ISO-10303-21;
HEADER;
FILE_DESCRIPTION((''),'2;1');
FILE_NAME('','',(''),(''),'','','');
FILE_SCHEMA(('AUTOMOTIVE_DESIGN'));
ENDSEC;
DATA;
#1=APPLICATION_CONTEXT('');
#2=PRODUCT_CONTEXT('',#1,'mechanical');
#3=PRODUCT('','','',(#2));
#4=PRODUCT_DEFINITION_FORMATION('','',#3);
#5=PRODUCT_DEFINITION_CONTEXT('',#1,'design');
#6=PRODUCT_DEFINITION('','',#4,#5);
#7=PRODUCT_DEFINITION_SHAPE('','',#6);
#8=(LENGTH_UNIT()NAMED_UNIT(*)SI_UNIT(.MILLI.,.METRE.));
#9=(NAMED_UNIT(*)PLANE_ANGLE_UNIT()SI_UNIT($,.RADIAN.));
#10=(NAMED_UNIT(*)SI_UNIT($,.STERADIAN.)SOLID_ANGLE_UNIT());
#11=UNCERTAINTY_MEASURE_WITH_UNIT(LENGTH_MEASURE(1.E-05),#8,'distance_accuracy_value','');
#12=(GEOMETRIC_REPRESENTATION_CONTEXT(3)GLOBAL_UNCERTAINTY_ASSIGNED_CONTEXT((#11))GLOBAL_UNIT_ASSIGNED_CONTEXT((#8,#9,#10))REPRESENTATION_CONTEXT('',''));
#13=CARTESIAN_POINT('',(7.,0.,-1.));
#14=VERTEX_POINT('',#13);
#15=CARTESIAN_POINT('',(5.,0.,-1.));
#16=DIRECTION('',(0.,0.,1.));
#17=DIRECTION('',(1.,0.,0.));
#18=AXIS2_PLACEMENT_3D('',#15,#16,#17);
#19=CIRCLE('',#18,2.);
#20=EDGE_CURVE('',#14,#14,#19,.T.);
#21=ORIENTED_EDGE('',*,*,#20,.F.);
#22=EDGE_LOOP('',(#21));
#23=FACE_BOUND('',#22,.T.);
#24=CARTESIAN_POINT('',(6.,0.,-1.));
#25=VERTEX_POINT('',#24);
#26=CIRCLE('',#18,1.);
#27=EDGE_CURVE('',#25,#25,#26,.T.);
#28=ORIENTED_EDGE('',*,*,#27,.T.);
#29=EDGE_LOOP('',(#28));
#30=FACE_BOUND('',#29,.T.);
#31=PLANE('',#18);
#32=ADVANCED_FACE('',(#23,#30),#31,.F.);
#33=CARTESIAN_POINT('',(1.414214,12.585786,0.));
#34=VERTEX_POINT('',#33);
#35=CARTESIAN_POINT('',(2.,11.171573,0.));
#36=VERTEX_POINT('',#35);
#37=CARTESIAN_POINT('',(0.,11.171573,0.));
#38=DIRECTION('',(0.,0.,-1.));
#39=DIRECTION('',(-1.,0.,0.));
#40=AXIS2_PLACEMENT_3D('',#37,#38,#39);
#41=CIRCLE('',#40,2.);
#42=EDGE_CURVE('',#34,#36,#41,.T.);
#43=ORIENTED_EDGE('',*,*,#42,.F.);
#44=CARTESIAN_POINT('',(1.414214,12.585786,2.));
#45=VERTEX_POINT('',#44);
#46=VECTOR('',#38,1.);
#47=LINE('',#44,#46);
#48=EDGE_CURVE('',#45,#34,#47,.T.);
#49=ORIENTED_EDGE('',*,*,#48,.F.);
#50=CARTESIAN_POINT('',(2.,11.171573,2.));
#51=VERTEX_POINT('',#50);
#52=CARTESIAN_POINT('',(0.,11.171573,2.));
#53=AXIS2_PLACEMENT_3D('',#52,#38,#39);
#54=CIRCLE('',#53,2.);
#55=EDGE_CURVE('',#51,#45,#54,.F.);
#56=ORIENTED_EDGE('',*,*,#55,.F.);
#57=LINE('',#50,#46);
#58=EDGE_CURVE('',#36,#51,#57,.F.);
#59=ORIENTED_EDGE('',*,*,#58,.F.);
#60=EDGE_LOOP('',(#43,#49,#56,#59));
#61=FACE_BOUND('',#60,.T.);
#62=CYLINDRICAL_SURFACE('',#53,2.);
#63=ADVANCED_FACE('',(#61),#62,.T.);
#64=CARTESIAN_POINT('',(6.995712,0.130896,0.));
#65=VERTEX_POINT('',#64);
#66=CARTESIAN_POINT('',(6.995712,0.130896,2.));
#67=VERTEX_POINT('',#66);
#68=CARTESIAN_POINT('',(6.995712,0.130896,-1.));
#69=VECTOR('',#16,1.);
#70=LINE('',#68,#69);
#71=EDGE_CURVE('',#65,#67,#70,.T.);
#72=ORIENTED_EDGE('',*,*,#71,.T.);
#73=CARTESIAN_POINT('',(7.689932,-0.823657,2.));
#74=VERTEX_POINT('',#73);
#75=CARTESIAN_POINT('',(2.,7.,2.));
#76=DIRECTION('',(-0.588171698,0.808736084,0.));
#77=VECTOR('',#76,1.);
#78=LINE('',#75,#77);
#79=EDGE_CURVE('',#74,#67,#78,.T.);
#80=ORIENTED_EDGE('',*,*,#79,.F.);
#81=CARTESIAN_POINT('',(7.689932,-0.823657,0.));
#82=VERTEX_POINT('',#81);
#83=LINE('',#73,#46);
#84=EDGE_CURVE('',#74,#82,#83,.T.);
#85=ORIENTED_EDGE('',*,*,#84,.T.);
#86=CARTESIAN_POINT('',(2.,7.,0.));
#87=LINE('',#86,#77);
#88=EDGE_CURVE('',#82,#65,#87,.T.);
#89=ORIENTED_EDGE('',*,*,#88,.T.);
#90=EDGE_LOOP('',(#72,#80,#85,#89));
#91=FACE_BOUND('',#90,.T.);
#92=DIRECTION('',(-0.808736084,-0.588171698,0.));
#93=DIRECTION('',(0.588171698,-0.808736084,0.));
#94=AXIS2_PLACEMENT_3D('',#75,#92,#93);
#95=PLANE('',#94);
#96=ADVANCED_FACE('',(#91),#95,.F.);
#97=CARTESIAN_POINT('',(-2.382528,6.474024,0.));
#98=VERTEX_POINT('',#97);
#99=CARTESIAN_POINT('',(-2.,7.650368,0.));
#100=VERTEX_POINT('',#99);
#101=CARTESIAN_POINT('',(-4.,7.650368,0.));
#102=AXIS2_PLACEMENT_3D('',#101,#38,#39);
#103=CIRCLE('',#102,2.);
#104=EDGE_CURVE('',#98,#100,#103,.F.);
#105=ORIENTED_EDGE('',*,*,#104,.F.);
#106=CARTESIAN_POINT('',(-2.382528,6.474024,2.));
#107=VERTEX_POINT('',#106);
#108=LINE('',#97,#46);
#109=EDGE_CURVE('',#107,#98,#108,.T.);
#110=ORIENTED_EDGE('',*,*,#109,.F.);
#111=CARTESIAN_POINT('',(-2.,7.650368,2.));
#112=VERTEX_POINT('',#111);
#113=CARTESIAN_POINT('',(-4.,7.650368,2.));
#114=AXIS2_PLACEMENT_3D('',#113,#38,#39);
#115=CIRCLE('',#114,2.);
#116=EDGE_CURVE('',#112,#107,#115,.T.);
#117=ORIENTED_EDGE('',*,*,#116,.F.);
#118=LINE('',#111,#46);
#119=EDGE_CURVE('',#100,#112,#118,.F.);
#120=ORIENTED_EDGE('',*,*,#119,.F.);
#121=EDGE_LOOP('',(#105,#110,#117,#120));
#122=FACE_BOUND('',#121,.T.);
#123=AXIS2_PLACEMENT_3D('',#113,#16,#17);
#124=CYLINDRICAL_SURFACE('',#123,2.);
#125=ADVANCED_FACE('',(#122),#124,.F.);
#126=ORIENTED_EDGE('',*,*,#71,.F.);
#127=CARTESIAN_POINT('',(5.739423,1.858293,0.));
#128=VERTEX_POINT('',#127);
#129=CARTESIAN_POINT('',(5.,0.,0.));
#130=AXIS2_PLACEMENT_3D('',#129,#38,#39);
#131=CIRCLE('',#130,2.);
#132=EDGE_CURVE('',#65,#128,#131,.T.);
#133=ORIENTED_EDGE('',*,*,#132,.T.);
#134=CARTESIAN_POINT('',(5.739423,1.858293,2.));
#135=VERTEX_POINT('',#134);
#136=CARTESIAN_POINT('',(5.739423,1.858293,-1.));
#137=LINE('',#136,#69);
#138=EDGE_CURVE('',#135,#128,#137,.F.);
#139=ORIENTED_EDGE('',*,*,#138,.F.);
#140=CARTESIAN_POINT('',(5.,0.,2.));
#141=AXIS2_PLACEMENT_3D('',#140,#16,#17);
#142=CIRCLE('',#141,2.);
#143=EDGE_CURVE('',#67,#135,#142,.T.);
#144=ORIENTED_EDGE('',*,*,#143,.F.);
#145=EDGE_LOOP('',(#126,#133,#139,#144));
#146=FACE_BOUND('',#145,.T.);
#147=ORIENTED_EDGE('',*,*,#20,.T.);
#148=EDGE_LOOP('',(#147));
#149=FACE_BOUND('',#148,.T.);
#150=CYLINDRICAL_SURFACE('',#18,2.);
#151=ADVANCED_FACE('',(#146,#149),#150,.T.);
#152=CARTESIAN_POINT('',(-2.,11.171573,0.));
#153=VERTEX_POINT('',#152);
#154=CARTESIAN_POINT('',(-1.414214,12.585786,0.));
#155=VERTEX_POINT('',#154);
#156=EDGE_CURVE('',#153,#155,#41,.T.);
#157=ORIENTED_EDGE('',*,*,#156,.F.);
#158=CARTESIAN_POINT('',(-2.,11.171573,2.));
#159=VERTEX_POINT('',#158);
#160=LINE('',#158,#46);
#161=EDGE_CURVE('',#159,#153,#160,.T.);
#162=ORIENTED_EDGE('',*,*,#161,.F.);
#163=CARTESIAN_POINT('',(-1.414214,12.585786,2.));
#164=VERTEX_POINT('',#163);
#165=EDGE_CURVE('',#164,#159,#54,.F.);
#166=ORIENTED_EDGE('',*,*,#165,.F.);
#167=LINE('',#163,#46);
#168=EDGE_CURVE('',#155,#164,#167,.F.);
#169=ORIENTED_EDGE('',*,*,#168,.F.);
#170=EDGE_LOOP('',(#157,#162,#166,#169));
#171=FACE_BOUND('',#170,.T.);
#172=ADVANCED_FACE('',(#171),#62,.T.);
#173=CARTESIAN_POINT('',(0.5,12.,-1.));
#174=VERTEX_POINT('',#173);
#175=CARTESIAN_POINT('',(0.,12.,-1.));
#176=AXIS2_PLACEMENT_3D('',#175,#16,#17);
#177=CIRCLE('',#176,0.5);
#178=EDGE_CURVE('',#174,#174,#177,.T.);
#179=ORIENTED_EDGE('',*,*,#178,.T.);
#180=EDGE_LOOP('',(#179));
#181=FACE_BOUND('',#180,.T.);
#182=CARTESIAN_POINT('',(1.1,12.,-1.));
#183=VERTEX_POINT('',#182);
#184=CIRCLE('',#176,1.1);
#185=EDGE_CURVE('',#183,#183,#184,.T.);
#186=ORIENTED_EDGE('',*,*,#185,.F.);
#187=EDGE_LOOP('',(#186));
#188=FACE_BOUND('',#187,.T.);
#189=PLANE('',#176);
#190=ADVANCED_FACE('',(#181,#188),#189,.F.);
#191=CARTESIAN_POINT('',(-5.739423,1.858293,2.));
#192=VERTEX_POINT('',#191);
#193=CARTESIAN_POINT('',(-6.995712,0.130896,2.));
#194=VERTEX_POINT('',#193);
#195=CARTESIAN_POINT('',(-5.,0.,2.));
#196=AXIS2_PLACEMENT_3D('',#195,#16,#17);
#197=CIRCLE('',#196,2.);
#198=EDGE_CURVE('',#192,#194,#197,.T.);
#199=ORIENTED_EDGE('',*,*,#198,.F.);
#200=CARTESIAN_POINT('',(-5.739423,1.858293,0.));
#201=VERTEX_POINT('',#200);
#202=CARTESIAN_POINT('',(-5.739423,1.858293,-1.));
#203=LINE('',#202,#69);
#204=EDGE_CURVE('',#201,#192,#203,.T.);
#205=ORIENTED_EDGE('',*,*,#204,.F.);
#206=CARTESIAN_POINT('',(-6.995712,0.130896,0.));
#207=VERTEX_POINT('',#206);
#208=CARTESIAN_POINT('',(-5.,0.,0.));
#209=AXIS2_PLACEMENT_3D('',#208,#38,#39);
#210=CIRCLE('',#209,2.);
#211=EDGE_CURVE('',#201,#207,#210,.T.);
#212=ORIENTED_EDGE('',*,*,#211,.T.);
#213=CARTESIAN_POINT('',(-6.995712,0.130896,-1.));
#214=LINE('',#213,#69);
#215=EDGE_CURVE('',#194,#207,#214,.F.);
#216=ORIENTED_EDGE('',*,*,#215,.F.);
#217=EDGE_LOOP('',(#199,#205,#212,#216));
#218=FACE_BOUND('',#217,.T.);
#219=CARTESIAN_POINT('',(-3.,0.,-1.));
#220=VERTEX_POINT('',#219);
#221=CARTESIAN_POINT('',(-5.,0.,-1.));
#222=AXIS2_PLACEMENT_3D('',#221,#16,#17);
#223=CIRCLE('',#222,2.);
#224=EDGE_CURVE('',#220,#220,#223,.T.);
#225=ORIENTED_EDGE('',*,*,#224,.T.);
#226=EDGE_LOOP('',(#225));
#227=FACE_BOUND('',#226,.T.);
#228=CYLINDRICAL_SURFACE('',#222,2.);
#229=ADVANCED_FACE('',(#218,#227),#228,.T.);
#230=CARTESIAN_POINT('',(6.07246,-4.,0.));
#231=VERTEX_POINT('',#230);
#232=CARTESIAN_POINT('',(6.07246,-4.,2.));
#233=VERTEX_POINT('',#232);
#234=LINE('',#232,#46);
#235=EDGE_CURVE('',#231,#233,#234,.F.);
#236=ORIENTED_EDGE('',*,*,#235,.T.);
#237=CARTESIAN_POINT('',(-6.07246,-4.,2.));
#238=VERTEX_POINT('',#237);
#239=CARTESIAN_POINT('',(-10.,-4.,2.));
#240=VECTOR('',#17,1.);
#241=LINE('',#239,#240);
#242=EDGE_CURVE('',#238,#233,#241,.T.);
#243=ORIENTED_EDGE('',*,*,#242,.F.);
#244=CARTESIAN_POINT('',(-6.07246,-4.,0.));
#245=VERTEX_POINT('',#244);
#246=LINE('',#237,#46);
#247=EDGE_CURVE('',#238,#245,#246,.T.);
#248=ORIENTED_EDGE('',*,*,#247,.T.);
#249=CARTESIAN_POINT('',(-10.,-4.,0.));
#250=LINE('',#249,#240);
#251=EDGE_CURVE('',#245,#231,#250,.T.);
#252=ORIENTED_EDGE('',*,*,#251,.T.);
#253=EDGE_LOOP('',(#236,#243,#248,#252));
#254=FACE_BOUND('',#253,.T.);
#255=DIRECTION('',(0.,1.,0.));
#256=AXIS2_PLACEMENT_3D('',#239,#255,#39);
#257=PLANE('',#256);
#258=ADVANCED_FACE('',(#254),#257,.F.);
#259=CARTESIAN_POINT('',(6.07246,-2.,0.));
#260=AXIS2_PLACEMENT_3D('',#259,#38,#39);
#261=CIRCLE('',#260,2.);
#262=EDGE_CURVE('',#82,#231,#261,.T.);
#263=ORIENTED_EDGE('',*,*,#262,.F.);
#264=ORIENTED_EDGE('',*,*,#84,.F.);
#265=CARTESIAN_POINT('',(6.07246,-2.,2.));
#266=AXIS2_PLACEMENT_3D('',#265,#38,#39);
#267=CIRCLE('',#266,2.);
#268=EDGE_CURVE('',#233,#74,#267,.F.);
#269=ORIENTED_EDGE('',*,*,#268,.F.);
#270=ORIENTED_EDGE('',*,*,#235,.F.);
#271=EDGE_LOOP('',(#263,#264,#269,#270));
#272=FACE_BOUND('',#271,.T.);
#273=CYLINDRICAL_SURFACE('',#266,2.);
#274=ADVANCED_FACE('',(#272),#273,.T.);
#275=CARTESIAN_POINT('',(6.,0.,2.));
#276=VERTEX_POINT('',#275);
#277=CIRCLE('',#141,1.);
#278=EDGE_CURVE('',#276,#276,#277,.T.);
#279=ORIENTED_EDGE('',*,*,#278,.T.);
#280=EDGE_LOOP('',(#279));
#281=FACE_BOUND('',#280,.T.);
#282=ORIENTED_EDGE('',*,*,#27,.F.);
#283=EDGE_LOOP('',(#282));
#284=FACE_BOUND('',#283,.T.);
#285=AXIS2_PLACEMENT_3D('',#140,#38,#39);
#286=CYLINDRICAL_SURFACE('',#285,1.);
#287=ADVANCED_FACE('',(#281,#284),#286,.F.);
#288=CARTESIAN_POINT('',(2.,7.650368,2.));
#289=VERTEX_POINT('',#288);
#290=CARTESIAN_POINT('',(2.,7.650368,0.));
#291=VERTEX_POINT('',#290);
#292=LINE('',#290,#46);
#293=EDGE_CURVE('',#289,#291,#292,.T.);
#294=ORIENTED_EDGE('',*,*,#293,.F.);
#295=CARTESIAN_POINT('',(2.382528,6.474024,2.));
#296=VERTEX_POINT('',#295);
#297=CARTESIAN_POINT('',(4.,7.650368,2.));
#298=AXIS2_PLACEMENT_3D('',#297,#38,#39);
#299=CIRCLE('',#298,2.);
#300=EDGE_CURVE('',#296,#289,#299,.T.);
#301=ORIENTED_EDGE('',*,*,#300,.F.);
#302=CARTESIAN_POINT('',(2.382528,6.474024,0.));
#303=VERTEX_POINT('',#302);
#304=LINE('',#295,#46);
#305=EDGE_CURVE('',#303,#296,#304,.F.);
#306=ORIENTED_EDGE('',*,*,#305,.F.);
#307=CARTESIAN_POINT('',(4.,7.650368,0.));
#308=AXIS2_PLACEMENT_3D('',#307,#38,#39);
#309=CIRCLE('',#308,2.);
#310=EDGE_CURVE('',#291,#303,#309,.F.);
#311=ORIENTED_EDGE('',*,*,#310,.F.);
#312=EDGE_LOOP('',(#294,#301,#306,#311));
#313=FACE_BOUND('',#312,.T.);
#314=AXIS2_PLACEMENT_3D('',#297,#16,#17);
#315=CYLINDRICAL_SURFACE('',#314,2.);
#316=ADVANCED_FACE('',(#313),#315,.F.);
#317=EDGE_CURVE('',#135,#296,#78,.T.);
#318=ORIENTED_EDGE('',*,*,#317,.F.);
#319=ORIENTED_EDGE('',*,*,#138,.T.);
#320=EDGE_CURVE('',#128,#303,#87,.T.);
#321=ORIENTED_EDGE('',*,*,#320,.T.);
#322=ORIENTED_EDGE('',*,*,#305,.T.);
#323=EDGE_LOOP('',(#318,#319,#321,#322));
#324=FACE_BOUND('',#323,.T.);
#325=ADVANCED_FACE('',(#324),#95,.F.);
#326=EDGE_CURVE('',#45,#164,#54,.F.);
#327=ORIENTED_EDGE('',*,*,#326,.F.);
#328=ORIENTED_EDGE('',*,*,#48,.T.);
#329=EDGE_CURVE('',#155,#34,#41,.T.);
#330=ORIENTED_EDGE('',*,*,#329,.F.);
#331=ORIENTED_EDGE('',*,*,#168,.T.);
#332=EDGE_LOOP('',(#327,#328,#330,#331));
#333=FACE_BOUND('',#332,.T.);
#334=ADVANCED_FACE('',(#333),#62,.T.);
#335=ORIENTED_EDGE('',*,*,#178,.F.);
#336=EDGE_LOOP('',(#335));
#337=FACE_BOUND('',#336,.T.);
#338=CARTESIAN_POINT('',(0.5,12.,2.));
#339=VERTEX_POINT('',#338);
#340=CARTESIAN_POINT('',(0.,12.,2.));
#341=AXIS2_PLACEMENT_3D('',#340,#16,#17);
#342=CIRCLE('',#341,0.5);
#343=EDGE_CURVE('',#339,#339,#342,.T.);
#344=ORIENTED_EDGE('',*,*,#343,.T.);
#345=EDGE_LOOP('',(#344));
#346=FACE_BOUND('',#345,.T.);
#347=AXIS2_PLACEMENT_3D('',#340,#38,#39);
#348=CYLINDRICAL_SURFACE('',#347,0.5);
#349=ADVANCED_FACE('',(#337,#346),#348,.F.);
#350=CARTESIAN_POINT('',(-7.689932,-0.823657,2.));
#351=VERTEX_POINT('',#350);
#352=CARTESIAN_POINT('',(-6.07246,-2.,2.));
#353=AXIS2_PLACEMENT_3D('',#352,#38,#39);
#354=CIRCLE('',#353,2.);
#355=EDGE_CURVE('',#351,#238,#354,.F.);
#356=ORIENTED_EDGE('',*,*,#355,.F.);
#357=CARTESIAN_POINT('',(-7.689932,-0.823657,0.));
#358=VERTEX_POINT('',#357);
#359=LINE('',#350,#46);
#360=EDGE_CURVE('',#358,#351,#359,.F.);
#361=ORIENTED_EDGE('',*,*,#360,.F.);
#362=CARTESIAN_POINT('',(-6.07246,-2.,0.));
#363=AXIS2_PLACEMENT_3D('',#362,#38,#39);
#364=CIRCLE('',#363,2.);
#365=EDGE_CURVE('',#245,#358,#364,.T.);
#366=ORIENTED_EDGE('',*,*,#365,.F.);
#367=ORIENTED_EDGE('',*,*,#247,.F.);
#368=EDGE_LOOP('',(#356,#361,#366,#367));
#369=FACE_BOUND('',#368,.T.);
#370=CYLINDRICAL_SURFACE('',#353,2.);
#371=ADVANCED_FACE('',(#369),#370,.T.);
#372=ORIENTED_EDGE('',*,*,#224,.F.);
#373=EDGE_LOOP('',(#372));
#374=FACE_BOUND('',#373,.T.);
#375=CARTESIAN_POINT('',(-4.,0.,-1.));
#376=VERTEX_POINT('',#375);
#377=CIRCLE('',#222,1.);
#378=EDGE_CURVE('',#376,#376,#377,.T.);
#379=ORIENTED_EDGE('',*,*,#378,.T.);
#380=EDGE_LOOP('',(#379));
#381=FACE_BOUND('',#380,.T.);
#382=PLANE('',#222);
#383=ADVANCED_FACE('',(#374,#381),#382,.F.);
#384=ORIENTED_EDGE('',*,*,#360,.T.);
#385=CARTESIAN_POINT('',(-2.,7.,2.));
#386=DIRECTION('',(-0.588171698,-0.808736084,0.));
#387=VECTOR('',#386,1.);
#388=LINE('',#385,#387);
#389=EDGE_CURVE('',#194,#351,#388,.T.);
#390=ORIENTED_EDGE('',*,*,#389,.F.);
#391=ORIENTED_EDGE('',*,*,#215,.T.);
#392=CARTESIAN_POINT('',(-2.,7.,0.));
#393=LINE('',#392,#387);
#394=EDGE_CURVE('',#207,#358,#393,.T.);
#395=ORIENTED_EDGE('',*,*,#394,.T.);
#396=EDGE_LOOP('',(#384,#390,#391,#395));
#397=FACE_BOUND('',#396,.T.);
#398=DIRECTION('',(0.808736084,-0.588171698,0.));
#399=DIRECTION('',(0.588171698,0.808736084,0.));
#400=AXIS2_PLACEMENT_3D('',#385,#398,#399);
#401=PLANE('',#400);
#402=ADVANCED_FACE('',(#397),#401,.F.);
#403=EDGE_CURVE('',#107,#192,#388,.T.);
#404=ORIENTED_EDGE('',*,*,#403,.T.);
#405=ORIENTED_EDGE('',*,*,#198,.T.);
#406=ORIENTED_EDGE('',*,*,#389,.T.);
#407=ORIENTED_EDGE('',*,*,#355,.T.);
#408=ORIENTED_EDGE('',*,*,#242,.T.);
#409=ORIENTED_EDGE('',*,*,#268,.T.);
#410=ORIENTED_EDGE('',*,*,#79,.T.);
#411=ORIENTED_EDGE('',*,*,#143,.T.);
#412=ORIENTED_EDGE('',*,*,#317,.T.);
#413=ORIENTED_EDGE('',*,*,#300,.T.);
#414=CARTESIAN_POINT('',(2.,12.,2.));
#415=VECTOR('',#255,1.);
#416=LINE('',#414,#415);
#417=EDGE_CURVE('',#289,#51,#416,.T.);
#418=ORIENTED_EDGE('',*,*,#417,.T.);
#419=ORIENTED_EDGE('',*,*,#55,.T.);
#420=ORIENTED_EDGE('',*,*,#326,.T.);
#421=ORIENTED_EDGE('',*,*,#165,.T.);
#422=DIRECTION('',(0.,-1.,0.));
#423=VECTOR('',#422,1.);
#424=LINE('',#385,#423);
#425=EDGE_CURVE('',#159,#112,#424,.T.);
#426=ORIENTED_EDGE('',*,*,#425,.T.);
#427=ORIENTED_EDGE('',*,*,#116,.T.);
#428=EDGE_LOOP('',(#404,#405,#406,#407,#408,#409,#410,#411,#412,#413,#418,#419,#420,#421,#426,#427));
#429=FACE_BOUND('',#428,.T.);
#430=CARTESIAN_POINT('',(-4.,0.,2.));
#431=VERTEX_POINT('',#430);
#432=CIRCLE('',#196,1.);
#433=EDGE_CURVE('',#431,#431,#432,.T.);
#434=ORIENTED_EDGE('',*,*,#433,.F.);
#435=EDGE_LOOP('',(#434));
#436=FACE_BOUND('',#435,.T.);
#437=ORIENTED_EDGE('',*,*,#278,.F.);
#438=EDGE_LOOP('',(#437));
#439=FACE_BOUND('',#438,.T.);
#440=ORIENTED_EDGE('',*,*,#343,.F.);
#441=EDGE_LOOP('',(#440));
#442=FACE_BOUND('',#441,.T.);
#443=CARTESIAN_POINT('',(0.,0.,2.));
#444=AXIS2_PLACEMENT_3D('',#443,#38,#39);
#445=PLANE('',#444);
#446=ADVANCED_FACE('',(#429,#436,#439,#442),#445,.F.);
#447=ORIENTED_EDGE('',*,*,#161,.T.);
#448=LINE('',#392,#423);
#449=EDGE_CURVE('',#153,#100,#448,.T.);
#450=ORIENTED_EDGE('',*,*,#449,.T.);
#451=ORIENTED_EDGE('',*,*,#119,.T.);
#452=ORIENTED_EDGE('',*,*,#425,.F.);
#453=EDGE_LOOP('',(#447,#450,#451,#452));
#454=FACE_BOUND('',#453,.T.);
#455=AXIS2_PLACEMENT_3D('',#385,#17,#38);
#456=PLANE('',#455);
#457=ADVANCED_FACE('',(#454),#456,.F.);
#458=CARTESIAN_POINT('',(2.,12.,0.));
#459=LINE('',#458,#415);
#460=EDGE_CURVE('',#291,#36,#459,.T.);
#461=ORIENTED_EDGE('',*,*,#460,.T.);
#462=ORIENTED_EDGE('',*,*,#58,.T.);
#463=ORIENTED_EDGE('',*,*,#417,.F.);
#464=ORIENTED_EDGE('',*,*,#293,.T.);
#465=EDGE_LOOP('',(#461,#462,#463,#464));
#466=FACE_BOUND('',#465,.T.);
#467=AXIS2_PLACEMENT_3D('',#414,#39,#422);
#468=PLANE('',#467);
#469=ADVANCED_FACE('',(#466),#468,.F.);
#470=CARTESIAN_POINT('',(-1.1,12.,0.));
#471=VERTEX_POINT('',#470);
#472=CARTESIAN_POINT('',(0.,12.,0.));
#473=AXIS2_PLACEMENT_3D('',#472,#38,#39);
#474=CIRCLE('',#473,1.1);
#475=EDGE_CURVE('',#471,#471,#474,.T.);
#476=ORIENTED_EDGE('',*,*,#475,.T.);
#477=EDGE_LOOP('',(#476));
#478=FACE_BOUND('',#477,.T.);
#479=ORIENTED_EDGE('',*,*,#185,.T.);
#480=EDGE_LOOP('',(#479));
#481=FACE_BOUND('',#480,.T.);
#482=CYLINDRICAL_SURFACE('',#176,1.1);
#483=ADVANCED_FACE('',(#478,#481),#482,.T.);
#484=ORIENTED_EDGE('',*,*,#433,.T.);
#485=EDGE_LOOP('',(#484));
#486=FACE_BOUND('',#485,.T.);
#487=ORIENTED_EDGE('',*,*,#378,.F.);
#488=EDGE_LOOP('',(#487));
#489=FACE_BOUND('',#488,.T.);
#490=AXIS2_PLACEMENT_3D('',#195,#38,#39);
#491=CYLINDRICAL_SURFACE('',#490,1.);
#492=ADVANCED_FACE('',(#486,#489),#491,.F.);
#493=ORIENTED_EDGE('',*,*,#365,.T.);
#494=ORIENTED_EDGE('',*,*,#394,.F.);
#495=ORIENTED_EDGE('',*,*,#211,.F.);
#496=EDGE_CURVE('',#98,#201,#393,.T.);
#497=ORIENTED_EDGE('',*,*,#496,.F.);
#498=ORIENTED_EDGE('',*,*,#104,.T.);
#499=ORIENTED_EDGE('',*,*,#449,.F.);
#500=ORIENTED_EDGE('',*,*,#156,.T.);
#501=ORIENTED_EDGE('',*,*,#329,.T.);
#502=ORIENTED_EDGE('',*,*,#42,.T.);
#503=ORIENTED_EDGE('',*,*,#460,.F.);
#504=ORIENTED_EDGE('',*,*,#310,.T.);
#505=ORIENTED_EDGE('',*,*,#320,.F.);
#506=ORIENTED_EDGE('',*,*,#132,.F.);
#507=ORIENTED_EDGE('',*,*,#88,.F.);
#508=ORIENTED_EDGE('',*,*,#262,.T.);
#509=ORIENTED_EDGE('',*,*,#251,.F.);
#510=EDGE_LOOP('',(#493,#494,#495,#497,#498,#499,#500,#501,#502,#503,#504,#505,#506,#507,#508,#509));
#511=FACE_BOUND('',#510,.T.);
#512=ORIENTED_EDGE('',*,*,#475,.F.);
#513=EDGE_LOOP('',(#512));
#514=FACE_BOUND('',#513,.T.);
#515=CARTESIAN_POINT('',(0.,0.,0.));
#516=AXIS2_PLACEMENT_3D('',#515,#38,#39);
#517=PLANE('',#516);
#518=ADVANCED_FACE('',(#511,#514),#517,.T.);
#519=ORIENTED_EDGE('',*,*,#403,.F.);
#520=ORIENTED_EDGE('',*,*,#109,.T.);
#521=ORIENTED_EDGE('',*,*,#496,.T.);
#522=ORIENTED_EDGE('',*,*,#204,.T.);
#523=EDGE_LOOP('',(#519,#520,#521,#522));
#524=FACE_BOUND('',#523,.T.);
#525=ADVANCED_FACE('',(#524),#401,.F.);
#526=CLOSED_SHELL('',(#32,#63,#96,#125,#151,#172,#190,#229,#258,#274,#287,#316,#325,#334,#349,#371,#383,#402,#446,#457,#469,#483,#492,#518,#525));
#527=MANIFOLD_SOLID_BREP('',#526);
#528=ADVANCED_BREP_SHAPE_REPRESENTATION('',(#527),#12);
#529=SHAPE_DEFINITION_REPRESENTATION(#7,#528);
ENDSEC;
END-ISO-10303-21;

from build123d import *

# Parameters (mm, degrees)
SKETCH_1_R      = 1
SKETCH_1_R_2    = 0.5
EXTRUDE_1_DEPTH = 2
FILLET_1_R      = 2
FILLET_2_R      = 2
EXTRUDE_START   = -3
SKETCH_3_R      = 1.1
SKETCH_3_R_2    = 0.5
SKETCH_3_R_3    = 2
SKETCH_3_R_4    = 1
EXTRUDE_3_DEPTH = 3


with BuildPart() as part:
    # 草图1 → 凸台-拉伸1 (new body)
    with BuildSketch(Plane.XY):
        Polygon((-10, -4), (10, -4), (2, 7), (2, 12), (0, 14), (-2, 12), (-2, 7), align=None)
        with Locations((-5, 0)):
            Circle(SKETCH_1_R, mode=Mode.SUBTRACT)
        with Locations((5, 0)):
            Circle(SKETCH_1_R, mode=Mode.SUBTRACT)
        with Locations((0, 12)):
            Circle(SKETCH_1_R_2, mode=Mode.SUBTRACT)
    extrude(amount=EXTRUDE_1_DEPTH)

    # 圆角1
    fillet_1_edges = [part.edges().sort_by_distance(p)[0] for p in [
        (0, 14, 1),
        (2, 12, 1),
        (-2, 12, 1),
        (-2, 7, 1),
        (2, 7, 1),
    ]]
    fillet(fillet_1_edges, radius=FILLET_1_R - 0.0001)  # a hair under: the kernel refuses the full size

    # 圆角2
    fillet_2_edges = [part.edges().sort_by_distance(p)[0] for p in [
        (10, -4, 1),
        (-10, -4, 1),
    ]]
    fillet(fillet_2_edges, radius=FILLET_2_R)

    # 草图3 → 凸台-拉伸3 (add)
    # profile 1 of 3: a face of its own
    with BuildSketch(Plane.XY.offset(2).offset(EXTRUDE_START)):
        with Locations((0, 12)):
            Circle(SKETCH_3_R)
        with Locations((0, 12)):
            Circle(SKETCH_3_R_2, mode=Mode.SUBTRACT)
    # profile 2 of 3: a face of its own
    with BuildSketch(Plane.XY.offset(2).offset(EXTRUDE_START)):
        with Locations((-5, 0)):
            Circle(SKETCH_3_R_3)
        with Locations((-5, 0)):
            Circle(SKETCH_3_R_4, mode=Mode.SUBTRACT)
    # profile 3 of 3: a face of its own
    with BuildSketch(Plane.XY.offset(2).offset(EXTRUDE_START)):
        with Locations((5, 0)):
            Circle(SKETCH_3_R_3)
        with Locations((5, 0)):
            Circle(SKETCH_3_R_4, mode=Mode.SUBTRACT)
    extrude(amount=EXTRUDE_3_DEPTH)


solid = part.part
